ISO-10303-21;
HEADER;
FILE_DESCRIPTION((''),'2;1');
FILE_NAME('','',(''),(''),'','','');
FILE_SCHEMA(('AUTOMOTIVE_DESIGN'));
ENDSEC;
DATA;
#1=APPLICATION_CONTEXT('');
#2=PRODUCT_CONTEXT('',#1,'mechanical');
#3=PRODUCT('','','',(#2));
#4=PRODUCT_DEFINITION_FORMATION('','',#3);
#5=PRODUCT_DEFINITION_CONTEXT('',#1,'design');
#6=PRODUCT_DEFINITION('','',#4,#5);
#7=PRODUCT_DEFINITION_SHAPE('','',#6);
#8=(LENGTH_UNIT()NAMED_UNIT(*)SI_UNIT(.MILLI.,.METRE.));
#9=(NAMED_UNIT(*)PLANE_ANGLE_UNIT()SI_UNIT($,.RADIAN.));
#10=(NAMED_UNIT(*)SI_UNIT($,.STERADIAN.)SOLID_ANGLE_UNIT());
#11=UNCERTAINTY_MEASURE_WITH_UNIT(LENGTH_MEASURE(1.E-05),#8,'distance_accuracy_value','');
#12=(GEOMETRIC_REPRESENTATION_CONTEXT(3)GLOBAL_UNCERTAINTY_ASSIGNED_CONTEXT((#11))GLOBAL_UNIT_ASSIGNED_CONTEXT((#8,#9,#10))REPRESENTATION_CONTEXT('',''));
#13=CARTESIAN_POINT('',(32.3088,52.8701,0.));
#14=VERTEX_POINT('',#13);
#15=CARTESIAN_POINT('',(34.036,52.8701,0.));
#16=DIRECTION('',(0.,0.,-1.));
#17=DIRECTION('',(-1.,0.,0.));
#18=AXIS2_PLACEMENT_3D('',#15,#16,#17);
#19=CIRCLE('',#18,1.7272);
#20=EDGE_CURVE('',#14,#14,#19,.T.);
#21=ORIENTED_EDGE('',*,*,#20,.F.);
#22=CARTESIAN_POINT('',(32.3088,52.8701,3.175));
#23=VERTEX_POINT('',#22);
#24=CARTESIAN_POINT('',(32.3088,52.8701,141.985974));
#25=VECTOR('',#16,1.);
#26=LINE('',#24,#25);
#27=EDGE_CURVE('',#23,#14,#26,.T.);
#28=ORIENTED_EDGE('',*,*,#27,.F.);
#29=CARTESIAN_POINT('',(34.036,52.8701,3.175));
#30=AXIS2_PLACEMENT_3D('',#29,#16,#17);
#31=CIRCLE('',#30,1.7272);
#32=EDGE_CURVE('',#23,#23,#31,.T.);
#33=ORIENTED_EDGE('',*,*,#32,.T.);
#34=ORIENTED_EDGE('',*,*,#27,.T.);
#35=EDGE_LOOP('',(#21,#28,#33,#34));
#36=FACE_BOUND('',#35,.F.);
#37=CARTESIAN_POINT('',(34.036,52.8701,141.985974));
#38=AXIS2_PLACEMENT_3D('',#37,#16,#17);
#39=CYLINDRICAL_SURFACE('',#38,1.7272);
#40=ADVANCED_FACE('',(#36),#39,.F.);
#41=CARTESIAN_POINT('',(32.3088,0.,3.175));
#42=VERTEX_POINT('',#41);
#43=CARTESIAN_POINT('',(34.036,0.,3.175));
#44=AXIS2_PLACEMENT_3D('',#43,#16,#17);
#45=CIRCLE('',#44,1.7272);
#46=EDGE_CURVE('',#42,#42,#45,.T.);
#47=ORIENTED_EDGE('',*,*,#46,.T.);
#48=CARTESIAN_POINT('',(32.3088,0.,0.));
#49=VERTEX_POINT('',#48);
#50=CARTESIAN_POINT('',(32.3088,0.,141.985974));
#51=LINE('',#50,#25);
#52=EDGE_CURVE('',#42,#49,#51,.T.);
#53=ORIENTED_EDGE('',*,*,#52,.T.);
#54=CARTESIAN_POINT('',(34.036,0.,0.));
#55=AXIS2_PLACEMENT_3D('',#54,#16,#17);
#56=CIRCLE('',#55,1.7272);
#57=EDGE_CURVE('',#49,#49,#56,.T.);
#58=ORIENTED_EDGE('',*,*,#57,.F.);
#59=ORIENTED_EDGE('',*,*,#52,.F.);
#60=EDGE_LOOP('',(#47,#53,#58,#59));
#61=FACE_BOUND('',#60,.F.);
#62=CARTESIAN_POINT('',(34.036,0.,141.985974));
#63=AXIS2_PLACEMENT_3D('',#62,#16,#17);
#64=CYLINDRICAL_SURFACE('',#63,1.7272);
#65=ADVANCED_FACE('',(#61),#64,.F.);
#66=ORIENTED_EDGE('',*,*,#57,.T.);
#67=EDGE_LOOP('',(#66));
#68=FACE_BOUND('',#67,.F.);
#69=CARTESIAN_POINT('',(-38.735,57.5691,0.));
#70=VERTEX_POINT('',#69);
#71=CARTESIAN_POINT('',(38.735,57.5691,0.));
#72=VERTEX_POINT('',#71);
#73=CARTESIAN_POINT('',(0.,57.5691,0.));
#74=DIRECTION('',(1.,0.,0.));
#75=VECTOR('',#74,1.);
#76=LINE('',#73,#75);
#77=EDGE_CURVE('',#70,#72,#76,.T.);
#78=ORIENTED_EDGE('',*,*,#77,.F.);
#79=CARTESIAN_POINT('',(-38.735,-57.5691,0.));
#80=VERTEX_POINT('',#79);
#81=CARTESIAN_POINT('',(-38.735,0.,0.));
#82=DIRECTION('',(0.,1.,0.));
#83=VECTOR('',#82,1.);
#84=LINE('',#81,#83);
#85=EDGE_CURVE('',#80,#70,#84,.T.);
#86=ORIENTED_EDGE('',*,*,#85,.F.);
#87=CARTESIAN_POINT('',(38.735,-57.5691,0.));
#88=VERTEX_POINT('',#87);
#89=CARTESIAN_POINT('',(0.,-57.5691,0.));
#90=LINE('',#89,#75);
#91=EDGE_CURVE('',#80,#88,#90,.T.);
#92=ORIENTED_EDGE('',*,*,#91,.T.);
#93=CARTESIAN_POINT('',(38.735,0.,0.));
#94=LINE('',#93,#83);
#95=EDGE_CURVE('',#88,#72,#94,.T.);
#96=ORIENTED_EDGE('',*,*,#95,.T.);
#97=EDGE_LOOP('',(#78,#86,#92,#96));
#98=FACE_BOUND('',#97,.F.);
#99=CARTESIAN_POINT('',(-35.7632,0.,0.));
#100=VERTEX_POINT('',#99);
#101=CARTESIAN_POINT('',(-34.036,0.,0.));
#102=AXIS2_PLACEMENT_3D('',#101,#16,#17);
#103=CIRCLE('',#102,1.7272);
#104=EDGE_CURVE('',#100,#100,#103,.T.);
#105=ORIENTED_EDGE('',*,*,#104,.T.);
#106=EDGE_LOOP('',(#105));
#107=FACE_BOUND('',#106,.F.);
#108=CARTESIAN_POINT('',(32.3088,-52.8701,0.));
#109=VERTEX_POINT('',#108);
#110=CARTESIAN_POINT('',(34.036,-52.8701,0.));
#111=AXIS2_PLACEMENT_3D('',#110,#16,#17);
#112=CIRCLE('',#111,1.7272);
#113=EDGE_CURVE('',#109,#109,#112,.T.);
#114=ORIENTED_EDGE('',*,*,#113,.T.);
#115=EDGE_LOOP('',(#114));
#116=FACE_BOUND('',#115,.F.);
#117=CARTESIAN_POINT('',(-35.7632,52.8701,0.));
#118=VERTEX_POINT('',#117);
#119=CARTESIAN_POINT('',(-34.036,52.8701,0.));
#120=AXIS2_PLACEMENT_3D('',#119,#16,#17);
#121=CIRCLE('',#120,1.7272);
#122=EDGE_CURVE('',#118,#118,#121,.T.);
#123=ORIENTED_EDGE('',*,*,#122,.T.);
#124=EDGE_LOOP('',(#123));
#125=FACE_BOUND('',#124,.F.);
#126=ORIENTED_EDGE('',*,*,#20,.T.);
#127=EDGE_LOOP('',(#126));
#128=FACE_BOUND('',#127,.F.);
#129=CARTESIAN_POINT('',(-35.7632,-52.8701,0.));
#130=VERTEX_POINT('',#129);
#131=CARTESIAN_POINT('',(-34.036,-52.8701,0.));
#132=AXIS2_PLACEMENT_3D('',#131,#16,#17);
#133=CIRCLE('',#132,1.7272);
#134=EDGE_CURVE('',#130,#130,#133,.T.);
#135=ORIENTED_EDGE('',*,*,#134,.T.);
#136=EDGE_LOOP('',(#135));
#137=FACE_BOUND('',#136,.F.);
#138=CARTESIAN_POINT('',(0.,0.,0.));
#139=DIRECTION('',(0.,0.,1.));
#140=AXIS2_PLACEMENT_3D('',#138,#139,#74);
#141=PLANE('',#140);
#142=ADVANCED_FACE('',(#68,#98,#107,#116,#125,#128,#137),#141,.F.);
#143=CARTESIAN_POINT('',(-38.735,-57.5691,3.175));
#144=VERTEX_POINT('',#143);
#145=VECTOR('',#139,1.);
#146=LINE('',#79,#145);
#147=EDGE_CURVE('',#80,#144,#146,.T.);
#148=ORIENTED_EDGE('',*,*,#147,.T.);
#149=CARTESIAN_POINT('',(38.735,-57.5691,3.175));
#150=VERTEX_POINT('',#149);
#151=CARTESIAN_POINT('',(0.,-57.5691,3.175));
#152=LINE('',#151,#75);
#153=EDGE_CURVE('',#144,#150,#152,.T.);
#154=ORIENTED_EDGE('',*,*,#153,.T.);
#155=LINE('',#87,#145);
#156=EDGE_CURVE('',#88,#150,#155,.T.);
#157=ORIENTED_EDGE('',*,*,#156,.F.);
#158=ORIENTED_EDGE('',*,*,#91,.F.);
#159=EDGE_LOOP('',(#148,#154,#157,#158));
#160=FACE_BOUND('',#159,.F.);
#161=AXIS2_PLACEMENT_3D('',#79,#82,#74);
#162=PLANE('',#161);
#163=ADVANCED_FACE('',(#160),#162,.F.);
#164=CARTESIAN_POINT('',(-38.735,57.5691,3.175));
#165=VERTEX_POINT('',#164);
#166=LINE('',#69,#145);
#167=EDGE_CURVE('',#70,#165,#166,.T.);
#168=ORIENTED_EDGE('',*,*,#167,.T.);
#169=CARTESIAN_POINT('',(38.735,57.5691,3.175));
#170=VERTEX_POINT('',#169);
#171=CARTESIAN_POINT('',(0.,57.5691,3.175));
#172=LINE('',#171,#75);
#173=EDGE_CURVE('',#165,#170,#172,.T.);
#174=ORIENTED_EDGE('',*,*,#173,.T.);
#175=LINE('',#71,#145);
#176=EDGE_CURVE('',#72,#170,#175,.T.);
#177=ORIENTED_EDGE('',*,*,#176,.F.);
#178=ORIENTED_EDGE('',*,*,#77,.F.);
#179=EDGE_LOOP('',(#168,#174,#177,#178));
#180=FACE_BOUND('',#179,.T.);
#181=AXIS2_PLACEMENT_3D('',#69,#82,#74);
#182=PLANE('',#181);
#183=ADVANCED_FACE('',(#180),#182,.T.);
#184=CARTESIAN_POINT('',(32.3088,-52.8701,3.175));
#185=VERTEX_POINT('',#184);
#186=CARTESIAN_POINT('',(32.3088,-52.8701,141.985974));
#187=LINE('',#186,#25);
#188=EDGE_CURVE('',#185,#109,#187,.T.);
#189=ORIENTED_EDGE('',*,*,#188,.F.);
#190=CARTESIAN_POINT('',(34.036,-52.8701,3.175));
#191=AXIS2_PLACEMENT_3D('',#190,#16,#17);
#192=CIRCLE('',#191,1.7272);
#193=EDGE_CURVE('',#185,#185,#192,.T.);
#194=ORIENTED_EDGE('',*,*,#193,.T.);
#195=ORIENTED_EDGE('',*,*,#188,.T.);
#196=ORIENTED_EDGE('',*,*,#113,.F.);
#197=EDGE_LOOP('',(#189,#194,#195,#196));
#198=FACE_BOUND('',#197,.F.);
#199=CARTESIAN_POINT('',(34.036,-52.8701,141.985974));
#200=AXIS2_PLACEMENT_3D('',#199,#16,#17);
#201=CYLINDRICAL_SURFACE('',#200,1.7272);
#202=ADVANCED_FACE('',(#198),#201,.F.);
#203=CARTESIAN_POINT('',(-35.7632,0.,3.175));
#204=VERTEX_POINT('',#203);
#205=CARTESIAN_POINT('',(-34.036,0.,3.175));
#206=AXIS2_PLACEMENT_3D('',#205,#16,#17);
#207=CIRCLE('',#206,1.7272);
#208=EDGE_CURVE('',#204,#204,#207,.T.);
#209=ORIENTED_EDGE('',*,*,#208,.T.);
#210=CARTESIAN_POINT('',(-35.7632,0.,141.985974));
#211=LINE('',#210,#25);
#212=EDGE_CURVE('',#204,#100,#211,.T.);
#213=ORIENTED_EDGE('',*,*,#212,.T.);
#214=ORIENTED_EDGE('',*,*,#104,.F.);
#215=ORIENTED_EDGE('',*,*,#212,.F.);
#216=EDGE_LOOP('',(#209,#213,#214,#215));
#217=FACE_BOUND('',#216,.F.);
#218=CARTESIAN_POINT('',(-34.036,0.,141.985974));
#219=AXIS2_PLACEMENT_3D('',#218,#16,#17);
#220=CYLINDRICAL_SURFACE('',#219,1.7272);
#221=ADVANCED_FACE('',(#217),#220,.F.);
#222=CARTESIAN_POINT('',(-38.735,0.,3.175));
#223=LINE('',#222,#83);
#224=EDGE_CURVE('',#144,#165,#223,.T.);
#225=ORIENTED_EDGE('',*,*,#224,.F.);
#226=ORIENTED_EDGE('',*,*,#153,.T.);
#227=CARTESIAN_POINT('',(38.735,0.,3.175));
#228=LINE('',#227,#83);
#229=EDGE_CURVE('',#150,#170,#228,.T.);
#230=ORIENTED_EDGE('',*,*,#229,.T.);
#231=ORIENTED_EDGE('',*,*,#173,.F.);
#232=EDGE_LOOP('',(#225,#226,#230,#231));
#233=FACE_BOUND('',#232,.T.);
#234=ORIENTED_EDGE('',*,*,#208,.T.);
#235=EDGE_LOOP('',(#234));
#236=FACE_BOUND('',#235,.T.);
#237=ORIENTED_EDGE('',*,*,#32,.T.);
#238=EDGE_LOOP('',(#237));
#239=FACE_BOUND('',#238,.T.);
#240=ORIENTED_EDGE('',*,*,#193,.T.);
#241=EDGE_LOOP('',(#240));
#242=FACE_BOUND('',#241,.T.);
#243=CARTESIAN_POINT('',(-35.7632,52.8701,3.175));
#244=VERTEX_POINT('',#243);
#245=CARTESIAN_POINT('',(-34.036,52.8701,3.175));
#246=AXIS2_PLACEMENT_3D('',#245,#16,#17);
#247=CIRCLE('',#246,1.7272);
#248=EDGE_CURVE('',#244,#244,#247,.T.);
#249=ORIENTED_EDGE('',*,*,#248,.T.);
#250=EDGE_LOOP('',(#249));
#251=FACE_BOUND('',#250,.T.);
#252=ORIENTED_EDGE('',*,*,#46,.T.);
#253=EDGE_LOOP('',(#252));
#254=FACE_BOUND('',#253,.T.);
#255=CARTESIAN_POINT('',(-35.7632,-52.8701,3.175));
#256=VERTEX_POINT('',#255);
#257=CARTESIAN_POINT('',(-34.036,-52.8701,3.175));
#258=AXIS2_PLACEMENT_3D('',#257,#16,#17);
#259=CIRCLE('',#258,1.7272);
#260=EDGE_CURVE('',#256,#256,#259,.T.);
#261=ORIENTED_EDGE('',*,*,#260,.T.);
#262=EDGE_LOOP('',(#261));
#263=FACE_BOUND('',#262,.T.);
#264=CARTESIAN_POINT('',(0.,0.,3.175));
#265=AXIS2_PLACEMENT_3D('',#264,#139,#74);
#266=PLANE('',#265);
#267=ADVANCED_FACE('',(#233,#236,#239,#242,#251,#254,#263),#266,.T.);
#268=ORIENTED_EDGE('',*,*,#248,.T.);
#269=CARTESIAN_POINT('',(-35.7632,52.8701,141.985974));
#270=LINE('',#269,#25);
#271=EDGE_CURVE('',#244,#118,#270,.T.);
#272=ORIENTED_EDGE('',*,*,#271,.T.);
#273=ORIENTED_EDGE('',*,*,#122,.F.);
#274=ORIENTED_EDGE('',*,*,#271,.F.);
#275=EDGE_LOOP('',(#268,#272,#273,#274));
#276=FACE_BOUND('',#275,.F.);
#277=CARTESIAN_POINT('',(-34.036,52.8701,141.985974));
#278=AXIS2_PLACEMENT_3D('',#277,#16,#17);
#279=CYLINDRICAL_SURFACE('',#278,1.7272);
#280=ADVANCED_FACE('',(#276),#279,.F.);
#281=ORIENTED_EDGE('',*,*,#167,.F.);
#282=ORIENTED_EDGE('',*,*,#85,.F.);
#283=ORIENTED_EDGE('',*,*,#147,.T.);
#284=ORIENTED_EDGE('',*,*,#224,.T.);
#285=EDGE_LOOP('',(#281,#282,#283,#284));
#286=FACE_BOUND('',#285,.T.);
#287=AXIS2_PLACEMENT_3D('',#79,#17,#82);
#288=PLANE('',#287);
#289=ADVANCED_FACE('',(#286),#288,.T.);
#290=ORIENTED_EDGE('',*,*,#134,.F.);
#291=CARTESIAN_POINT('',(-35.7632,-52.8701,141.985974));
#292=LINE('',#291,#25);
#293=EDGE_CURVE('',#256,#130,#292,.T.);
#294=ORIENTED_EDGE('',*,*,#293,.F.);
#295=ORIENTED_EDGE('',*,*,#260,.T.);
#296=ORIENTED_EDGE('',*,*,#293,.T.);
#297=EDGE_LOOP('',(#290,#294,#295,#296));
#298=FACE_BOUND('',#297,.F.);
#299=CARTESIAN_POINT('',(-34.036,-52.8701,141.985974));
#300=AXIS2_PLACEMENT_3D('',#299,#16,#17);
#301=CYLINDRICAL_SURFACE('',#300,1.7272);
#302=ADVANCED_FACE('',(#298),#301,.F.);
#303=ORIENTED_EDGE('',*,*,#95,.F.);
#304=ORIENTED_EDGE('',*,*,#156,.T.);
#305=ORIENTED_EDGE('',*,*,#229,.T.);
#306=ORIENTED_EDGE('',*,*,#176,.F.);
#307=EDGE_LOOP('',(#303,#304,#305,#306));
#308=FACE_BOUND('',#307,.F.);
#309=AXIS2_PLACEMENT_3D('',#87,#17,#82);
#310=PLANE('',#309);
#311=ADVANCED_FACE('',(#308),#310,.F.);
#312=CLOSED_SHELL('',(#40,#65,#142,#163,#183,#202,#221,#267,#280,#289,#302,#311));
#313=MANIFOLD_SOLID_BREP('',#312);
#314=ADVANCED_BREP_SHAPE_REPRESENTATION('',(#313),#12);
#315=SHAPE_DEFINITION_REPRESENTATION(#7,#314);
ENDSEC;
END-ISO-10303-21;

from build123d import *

# Parameters (mm, degrees)
F0_W     = 77.47
F0_H     = 115.1382
F1_DEPTH = 3.175
F3_D     = 3.4544


# Not quite as in the source:
# - a length typed as a fraction of an inch, garbled in the dataset ("3 / 203.2 mm" for 3/8 in), is restored


with BuildPart() as f1:
    # F0 (on Top) → F1 (new body)
    with BuildSketch(Plane.XY):
        Rectangle(F0_W, F0_H)
    extrude(amount=F1_DEPTH)

    # F3 (through all)
    with Locations(Plane.XY.offset(3.175)):
        with Locations((-34.036, 52.8701), (34.036, 52.8701), (34.036, -52.8701), (-34.036, -52.8701), (-34.036, 0), (34.036, 0)):
            Hole(F3_D / 2)


solid = f1.part
